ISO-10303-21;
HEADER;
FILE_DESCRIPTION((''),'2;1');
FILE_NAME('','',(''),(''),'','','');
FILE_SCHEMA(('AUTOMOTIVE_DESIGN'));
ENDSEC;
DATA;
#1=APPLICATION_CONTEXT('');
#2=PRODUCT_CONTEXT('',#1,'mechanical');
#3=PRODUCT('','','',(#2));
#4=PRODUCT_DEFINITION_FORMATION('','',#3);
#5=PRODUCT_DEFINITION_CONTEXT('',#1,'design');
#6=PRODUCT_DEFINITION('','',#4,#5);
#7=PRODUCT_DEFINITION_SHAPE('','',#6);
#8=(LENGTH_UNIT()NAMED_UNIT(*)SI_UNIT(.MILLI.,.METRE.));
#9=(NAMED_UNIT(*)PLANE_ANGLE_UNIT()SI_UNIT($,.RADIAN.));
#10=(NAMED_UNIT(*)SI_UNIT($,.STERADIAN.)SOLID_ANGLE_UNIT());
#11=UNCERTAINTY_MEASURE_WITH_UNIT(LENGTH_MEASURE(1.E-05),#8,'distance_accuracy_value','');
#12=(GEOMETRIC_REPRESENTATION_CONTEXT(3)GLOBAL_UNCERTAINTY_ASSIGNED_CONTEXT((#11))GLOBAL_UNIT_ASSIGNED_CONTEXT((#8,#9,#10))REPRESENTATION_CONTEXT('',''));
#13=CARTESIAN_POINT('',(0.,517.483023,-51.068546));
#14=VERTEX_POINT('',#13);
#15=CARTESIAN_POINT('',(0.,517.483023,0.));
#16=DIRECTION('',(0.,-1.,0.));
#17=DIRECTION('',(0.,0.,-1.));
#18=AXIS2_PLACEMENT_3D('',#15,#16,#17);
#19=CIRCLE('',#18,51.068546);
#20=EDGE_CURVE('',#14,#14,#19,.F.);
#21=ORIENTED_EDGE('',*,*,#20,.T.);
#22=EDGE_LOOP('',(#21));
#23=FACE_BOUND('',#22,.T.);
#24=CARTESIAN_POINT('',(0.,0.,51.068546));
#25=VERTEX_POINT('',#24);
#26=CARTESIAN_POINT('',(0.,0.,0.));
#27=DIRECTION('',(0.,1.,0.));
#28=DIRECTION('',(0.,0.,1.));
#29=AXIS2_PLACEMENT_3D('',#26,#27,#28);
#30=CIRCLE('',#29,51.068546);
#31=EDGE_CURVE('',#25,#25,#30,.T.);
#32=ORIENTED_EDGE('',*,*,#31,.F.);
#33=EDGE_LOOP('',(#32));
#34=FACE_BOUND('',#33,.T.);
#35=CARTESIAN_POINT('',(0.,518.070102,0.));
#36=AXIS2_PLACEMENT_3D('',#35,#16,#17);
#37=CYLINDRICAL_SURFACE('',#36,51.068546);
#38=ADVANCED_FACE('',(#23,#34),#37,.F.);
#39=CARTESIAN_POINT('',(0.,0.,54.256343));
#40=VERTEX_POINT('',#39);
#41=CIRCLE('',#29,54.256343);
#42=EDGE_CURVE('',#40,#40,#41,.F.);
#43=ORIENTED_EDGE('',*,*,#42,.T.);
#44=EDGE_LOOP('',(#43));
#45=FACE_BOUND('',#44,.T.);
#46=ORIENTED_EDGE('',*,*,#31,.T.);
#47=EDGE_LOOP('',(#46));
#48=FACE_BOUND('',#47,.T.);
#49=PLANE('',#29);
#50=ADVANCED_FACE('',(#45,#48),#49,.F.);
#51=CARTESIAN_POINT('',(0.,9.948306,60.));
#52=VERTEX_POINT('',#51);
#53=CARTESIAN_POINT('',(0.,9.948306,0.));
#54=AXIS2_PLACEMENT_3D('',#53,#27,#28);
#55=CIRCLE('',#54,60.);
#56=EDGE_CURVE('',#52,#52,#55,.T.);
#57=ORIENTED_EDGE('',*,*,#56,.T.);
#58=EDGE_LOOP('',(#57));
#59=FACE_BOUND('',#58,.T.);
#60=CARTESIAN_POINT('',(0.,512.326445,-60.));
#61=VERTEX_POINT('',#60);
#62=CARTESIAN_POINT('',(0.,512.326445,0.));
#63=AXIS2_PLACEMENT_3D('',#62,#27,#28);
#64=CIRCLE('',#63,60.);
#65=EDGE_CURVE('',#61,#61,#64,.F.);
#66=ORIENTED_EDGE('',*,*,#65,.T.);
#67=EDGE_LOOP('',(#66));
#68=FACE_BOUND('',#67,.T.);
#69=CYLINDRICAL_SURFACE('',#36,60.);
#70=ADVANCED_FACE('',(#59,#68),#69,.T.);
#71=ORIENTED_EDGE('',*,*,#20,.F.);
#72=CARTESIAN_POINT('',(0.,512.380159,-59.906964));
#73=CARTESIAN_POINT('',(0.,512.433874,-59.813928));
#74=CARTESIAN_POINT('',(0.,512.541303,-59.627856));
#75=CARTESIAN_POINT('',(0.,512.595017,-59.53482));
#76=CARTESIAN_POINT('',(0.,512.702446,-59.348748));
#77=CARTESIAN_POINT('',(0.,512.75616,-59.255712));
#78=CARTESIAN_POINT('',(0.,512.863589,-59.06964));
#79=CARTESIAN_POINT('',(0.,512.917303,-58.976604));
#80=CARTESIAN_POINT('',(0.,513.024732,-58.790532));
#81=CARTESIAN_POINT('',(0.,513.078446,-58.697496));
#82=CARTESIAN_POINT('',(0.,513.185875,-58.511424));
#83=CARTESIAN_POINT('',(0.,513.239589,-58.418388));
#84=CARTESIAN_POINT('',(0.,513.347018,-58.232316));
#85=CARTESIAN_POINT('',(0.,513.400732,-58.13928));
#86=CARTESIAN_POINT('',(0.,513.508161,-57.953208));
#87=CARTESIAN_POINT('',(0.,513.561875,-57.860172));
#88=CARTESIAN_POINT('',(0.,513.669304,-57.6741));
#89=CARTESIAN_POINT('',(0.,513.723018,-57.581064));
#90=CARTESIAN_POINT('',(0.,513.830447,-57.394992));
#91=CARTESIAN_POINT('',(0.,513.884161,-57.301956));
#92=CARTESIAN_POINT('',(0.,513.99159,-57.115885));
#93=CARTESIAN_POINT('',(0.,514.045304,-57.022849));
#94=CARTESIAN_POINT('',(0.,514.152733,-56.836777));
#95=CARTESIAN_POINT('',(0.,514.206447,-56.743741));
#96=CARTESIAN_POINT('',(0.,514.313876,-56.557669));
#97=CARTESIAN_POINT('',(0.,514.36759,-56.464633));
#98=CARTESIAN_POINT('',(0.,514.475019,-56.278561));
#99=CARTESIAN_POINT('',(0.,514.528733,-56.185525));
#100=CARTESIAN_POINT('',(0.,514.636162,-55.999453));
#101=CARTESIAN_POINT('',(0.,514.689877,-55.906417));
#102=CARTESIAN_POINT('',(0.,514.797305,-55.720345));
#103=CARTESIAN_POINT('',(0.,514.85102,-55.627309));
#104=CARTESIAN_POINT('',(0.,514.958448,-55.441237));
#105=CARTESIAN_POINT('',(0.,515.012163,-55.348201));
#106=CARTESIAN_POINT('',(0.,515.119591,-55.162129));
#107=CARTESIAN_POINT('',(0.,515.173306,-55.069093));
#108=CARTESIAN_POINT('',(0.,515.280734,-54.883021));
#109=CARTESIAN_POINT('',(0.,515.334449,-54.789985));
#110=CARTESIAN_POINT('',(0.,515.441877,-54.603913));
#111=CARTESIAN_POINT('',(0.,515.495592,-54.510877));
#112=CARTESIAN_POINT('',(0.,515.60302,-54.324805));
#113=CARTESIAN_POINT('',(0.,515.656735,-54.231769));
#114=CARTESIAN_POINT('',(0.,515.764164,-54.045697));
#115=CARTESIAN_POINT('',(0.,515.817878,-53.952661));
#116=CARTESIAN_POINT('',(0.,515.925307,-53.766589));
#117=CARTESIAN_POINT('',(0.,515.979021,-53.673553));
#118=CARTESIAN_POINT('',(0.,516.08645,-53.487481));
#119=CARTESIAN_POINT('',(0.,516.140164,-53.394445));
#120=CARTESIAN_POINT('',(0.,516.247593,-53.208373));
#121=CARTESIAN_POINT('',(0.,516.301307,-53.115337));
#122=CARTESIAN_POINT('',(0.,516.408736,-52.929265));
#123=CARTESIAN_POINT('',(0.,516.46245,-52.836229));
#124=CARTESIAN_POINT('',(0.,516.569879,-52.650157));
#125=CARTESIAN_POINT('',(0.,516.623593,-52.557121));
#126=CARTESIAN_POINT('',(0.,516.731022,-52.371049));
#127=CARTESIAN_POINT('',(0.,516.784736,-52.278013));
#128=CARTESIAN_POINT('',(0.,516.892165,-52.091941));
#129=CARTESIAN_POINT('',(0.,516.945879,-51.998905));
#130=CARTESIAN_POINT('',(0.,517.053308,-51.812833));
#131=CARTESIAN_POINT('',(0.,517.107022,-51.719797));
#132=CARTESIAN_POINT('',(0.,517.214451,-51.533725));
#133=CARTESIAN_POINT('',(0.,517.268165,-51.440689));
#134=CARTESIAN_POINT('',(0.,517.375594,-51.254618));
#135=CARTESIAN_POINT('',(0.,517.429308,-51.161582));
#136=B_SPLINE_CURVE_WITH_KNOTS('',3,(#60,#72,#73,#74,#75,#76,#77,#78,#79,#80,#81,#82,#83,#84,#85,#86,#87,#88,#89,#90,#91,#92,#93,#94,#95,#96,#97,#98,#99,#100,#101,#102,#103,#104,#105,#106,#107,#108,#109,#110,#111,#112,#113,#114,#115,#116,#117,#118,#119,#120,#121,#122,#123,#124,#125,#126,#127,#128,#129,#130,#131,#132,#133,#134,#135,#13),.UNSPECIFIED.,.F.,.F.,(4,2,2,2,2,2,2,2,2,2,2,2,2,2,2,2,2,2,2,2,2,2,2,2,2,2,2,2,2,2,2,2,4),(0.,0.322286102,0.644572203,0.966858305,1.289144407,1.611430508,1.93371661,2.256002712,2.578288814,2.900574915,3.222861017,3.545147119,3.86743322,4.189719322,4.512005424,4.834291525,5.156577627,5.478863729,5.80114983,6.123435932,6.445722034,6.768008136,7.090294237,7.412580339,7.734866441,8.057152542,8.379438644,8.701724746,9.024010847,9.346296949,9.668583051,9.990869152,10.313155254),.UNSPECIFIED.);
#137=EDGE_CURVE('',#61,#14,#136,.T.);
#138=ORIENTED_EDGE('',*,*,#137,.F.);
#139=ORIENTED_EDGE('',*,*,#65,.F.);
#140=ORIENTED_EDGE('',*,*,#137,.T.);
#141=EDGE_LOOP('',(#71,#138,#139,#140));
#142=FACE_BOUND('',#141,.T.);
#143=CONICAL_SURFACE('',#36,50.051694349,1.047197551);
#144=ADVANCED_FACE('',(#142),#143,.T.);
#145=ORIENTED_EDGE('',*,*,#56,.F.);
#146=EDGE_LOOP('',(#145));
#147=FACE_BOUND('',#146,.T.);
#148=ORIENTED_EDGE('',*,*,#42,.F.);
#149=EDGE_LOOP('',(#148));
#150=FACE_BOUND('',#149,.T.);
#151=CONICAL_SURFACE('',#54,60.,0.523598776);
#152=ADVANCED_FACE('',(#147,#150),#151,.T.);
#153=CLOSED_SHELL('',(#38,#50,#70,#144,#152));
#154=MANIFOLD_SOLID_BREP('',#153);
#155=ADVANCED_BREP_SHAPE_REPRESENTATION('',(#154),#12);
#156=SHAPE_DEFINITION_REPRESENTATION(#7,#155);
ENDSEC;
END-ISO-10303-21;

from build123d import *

# Parameters (mm, degrees)
SKETCH1_R           = 60
BOSS_EXTRUDE1_DEPTH = 518.070102
SKETCH2_R           = 51.068545557
CUT_EXTRUDE1_DEPTH  = 525.972980815
CHAMFER1_SIZE       = 5.743657
CHAMFER1_SIZE_2     = 9.948306


with BuildPart() as part:
    # Sketch1 → Boss-Extrude1 (new body)
    with BuildSketch(Plane(origin=(0, 0, 0), x_dir=(1, 0, 0), z_dir=(0, 1, 0))):
        with Locations(Location((0, 0, 0), (0, 0, 270))):
            Circle(SKETCH1_R)
    extrude(amount=BOSS_EXTRUDE1_DEPTH)

    # Sketch2 → Cut-Extrude1 (cut, through all)
    with BuildSketch(Plane(origin=(0, 0, 0), x_dir=(1, 0, 0), z_dir=(0, 1, 0))):
        with Locations(Location((0, 0, 0), (0, 0, 270))):
            Circle(SKETCH2_R)
    extrude(amount=CUT_EXTRUDE1_DEPTH, mode=Mode.SUBTRACT)

    # Chamfer1
    # the kernel refuses this chamfer: 9.948306, 5.743657 mm, written as the material it takes off along each edge
    with BuildSketch(Plane(origin=(0, 518.070102, 0), x_dir=(0, 0, 1), z_dir=(-1, 0, 0))) as chamfer1_piece_1:
        Polygon((60, -CHAMFER1_SIZE), (60 - CHAMFER1_SIZE_2, 0), (60, 0), align=None)
    revolve(axis=Axis((0, 518.070102, 0), (0, 1, 0)), mode=Mode.SUBTRACT)
    with BuildSketch(Plane(origin=(0, 0, 0), x_dir=(0, 0, 1), z_dir=(-1, 0, 0))) as chamfer1_piece_2:
        Polygon((60, CHAMFER1_SIZE_2), (60 - CHAMFER1_SIZE, 0), (60, 0), align=None)
    revolve(axis=Axis((0, 0, 0), (0, 1, 0)), mode=Mode.SUBTRACT)


solid = part.part
